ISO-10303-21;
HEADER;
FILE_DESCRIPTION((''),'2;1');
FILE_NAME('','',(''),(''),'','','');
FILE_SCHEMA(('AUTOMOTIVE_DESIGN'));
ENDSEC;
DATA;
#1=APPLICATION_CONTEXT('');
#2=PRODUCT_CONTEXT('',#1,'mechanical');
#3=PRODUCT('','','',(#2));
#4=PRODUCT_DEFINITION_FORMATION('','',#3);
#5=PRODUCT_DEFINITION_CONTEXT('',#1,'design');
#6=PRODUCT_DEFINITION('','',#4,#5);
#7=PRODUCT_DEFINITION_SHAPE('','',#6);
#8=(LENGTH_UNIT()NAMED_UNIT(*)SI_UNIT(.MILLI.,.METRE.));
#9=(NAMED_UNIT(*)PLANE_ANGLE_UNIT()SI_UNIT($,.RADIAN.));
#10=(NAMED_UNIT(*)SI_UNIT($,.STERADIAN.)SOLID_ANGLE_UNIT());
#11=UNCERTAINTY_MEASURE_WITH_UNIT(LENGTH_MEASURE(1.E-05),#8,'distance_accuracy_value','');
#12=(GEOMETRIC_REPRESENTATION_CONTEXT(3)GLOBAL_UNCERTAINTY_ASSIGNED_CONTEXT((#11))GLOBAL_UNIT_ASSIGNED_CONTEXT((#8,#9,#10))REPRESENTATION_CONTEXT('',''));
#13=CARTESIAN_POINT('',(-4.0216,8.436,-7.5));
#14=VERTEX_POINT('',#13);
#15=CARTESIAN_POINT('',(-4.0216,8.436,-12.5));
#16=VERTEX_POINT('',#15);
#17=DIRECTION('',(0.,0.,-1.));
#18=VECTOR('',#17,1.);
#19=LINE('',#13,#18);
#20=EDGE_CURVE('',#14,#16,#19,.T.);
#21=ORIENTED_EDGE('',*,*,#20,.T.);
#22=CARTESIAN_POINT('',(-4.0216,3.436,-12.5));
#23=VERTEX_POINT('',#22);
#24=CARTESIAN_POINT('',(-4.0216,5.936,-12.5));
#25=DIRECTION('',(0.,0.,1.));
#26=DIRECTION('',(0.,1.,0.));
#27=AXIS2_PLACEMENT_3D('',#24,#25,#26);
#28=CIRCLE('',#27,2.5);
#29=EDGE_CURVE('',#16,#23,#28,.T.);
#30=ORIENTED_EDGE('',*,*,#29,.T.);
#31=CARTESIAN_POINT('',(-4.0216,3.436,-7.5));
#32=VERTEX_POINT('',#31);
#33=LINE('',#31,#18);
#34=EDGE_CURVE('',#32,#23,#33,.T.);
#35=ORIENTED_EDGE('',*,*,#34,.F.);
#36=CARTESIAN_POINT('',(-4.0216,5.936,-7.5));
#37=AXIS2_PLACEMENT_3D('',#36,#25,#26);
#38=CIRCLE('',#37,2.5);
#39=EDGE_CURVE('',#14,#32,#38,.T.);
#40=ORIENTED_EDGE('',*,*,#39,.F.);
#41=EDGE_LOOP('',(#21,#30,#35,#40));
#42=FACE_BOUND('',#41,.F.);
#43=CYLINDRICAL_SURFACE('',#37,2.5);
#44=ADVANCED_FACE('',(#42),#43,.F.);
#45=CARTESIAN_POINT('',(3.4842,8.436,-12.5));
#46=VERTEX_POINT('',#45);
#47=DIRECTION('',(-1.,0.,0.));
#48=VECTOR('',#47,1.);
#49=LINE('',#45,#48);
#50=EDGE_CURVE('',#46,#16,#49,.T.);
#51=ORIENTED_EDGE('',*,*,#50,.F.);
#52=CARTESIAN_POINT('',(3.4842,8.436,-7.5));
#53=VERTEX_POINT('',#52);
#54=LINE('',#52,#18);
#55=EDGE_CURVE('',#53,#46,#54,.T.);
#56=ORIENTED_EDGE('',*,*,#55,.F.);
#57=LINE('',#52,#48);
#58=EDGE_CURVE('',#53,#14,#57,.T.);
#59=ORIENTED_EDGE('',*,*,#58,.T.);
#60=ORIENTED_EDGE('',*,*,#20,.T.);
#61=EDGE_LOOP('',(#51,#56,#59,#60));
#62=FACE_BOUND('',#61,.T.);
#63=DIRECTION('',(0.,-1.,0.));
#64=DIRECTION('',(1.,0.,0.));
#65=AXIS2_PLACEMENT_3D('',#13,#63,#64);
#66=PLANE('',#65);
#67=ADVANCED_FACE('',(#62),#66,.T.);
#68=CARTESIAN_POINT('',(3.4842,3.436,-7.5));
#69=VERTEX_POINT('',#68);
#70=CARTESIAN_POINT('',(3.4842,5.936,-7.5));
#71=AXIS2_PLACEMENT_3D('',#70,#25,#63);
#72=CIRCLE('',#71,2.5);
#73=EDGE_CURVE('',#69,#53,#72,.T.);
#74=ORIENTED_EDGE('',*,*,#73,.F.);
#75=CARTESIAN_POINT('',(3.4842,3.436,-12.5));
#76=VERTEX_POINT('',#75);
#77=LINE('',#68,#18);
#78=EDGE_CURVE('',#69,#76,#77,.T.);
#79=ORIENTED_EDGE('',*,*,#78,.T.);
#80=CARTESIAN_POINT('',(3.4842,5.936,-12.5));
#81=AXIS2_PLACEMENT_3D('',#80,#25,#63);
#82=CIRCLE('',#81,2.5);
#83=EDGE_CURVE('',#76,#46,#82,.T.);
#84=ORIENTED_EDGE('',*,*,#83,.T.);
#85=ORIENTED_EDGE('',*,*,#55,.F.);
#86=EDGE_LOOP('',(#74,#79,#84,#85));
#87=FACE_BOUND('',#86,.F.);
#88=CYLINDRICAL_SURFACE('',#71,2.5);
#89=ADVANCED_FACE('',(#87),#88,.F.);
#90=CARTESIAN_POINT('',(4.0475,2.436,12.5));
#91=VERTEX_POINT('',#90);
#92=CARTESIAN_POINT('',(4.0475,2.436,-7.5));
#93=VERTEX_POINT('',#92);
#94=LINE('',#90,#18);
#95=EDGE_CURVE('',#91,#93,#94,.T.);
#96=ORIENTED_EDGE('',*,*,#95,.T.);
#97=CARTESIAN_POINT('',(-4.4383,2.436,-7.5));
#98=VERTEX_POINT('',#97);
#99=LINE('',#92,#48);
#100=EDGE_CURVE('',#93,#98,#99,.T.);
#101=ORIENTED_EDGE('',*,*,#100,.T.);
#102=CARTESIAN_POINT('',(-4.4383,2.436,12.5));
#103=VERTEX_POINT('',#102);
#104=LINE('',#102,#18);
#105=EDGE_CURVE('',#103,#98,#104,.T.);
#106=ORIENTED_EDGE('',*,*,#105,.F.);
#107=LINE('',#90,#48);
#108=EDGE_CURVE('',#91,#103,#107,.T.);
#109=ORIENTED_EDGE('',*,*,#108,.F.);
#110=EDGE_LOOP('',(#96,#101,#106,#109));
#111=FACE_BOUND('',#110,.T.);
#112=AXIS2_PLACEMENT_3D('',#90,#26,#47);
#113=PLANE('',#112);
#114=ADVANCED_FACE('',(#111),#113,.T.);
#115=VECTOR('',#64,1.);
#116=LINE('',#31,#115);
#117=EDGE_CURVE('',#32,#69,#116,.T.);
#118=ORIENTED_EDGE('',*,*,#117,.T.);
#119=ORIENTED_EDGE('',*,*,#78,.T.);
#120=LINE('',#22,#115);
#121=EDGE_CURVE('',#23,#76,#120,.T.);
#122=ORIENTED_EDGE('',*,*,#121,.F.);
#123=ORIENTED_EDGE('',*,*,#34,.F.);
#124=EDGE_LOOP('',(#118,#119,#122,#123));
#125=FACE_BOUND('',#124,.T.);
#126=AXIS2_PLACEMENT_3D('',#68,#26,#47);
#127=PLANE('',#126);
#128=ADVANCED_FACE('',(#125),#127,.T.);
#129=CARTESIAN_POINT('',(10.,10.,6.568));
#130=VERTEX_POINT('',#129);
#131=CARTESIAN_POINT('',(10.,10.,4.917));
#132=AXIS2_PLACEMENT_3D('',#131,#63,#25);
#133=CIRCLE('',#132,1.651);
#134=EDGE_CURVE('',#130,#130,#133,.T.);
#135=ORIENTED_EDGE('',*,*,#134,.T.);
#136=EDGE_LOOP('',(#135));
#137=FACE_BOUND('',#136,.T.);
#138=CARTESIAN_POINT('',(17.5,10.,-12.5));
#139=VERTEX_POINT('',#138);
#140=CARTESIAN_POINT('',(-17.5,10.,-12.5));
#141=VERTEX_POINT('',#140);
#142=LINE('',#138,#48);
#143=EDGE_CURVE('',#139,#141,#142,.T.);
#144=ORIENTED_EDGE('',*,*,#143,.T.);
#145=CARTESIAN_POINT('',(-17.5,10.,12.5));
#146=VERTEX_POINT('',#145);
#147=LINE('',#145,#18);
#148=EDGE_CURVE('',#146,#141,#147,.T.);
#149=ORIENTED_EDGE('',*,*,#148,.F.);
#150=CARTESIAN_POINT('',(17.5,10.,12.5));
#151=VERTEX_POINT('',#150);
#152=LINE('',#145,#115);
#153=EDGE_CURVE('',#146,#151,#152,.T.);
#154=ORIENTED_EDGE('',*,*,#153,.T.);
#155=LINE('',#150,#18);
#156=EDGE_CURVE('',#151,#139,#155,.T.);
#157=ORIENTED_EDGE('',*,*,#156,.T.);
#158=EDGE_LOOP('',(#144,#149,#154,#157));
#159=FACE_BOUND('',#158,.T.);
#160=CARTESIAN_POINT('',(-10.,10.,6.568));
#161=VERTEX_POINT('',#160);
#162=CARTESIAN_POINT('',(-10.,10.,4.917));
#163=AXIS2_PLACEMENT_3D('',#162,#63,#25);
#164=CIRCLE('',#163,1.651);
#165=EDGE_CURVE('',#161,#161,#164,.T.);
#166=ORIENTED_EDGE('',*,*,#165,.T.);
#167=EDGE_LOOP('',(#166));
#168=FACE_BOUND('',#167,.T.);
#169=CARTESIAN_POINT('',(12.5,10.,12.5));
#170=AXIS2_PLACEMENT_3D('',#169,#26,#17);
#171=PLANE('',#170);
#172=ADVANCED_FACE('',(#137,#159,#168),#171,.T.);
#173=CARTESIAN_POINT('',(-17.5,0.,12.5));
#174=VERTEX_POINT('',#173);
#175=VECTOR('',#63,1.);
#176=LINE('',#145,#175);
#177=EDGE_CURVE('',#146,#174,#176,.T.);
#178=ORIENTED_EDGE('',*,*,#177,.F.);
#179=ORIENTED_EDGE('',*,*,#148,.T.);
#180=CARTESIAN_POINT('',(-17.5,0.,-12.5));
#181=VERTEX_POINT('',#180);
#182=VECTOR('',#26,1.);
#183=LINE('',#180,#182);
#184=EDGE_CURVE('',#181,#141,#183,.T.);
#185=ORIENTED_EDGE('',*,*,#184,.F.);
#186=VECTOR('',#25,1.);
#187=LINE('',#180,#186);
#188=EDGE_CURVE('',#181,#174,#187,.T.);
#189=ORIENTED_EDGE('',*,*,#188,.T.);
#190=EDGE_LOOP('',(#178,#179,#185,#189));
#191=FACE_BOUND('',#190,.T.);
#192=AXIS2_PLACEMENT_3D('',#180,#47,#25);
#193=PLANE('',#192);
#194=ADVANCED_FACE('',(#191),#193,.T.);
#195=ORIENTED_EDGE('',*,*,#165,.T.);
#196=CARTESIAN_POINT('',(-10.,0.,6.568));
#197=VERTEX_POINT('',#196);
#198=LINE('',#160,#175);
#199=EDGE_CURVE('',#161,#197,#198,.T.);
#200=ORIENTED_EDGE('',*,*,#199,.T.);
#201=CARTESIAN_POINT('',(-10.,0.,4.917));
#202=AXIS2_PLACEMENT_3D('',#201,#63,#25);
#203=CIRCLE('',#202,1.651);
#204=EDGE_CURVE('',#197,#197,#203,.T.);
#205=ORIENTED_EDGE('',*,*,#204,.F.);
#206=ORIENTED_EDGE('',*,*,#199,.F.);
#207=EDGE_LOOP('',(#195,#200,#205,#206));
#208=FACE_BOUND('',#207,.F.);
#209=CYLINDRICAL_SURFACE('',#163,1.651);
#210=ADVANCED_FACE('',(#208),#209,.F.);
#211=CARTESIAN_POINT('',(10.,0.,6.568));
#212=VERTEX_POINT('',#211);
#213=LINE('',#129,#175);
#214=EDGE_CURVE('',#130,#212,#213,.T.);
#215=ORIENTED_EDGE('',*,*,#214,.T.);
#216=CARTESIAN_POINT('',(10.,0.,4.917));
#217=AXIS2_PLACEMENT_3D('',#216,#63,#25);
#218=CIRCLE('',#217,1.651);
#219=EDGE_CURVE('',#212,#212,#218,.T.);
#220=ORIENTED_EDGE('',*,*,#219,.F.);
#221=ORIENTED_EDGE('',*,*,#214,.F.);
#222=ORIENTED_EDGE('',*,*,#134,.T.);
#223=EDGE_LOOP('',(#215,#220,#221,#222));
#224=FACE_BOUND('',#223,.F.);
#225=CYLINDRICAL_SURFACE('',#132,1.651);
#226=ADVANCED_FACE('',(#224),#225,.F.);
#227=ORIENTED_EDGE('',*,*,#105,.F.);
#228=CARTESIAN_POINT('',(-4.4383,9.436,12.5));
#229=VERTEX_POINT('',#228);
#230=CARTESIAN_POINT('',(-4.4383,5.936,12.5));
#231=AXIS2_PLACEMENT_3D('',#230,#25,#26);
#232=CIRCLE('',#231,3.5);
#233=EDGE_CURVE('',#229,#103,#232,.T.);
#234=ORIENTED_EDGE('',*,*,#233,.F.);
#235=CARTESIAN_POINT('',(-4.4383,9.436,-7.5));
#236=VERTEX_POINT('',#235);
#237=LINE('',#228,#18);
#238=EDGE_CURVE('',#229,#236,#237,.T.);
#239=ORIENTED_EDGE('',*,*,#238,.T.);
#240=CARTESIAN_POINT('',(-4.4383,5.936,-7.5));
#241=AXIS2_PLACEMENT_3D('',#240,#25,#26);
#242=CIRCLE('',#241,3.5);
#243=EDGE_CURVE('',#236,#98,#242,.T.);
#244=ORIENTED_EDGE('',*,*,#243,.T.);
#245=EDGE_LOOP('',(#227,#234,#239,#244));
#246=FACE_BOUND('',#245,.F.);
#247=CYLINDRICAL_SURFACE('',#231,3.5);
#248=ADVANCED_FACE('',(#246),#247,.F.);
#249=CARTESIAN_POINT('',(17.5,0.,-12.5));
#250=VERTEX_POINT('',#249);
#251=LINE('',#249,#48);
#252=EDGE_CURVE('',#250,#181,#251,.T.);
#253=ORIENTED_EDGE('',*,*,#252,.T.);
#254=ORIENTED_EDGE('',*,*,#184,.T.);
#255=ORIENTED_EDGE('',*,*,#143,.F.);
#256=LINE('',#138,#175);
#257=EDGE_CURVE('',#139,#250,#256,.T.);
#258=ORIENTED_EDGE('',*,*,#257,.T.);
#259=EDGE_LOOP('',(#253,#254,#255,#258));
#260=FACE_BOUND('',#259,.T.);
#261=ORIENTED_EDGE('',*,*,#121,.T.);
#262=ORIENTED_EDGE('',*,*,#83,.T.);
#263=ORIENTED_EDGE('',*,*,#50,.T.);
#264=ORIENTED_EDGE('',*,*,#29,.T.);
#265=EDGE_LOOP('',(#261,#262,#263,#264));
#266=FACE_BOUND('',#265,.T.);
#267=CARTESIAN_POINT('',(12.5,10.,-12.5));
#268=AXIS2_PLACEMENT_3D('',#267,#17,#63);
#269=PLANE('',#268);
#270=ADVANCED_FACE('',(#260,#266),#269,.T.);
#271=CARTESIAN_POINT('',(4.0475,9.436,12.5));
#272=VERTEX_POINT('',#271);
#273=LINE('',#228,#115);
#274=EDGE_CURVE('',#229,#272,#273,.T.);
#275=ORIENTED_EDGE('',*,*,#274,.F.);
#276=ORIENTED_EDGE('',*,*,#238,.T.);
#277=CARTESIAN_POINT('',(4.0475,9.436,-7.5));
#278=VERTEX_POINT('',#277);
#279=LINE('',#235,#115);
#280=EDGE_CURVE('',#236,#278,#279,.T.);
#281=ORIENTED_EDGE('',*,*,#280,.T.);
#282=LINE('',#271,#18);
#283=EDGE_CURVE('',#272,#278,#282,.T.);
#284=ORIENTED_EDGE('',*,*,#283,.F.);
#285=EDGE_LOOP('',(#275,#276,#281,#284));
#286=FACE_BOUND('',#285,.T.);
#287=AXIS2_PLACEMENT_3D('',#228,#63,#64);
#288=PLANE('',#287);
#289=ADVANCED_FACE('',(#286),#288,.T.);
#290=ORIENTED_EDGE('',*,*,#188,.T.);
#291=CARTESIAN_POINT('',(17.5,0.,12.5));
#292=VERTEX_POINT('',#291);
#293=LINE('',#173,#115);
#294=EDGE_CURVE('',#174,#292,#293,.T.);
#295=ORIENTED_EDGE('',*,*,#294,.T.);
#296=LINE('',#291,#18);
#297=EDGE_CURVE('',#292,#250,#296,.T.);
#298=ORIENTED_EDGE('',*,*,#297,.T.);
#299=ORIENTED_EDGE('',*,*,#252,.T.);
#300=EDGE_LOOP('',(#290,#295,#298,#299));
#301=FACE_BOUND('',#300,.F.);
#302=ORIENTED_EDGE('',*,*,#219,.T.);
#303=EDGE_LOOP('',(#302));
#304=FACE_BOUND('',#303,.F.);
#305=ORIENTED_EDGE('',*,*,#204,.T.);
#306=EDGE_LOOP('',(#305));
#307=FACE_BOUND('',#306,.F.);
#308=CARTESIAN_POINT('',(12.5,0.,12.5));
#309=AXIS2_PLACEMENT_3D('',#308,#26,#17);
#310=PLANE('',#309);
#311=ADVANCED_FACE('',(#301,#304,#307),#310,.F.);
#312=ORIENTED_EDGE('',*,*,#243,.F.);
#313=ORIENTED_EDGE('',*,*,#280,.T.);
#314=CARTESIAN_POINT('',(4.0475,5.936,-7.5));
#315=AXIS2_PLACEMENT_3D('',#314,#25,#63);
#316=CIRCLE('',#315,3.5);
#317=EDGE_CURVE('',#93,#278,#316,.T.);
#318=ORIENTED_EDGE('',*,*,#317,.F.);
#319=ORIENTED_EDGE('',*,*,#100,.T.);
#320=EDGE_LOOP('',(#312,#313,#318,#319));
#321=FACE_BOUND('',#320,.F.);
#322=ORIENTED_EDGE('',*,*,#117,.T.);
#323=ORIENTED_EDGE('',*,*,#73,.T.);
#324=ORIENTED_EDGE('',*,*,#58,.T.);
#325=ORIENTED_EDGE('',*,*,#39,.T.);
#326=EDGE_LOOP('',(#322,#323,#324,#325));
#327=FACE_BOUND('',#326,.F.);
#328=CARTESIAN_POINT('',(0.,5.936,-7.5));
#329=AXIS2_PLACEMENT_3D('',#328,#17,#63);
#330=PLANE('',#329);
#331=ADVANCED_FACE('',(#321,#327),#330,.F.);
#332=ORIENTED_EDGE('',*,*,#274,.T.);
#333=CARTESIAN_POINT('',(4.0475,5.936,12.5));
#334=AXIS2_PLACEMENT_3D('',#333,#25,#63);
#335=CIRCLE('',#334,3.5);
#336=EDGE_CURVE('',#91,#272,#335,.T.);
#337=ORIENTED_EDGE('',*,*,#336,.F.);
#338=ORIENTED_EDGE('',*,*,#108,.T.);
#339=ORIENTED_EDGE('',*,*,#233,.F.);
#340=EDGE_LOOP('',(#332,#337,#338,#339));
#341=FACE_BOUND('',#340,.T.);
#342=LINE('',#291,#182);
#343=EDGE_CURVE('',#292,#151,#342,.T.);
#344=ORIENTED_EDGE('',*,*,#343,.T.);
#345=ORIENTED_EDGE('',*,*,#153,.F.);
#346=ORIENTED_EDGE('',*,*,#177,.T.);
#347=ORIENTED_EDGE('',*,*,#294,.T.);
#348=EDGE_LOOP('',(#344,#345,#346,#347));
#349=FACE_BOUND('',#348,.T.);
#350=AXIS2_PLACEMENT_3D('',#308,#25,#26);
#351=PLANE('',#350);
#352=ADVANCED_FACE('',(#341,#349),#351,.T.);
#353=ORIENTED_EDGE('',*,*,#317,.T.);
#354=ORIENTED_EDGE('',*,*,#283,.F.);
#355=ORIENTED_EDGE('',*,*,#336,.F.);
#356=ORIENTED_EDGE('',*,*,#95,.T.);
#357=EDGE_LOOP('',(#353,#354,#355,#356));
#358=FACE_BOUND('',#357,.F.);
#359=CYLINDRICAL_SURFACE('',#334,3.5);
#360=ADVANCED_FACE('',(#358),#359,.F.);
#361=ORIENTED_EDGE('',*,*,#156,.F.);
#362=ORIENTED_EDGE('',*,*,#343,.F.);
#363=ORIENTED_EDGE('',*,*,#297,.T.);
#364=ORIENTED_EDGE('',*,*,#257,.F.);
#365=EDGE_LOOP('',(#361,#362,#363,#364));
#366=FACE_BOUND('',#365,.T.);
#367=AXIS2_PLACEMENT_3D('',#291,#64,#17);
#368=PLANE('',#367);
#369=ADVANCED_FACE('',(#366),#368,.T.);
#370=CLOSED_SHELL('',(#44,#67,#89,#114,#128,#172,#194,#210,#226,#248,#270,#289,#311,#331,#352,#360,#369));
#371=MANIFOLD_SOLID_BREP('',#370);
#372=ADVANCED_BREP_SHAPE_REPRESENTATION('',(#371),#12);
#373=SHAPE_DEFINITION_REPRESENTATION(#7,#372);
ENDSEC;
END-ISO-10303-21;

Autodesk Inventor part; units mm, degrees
ref_plane "YZ Plane" through (0, 0, 0) normal (1, 0, 0) x (0, 1, 0)
ref_plane "XZ Plane" through (0, 0, 0) normal (0, 1, 0) x (-1, 0, 0)
ref_plane "XY Plane" through (0, 0, 0) normal (0, 0, 1) x (1, 0, 0)
sketch "Sketch1" plane through (0, 0, 0) normal (0, 1, 0) x (-1, 0, 0)
  line L0 (12.5, 12.5) -> (-12.5, 12.5)
  line L1 (-12.5, 12.5) -> (-12.5, -12.5)
  line L2 (-12.5, -12.5) -> (12.5, -12.5)
  line L3 (12.5, -12.5) -> (12.5, 12.5)
  line L4 (12.5, 12.5) -> (-12.5, -12.5) construction
  line L5 (-12.5, 12.5) -> (12.5, -12.5) construction
  point P0 (0, 0)
  dimension "d0" = 25
  dimension "d1" = 25
extrude "Extrusion1" add sketch "Sketch1" along normal blind 10
sketch "Sketch2" plane through (-12.5, 0, 12.5) normal (0, 0, 1) x (1, 0, 0)
  line L0 (25, 0) -> (25, 10) projected
  line L1 (0, 10) -> (25, 10) projected
  point P0 (12.5, 0)
  point P1 (12.5, 5.936)
  dimension "d12" = 4.064
hole "Hole1" at (0, 5.936, 12.5) direction (0, 0, -1) diameter 5 depth 25 counterbore diameter 7 counterbore depth 20
sketch "Sketch4" plane through (-12.5, 0, 12.5) normal (0, 0, 1) x (1, 0, 0)
  line L0 (4.5617, 5.936) -> (20.0475, 5.936) construction
  line L1 (8.0617, 9.436) -> (16.5475, 9.436)
  line L2 (16.5475, 2.436) -> (8.0617, 2.436)
  arc A0 (8.0617, 9.436) -> (8.0617, 2.436) centre (8.0617, 5.936) ccw
  arc A1 (16.5475, 2.436) -> (16.5475, 9.436) centre (16.5475, 5.936) ccw
  point P0 (12.5, 0)
  point P1 (12.3046, 5.936)
extrude "Extrusion2" cut sketch "Sketch4" against normal blind 20
sketch "Sketch5" plane through (-4.4383, 9.436, -7.5) normal (0, 0, 1) x (1, 0, 0)
  line L0 (-2.0833, -3.5) -> (10.4225, -3.5) construction
  line L1 (0.4167, -1) -> (7.9225, -1)
  line L2 (7.9225, -6) -> (0.4167, -6)
  arc A0 (0.4167, -1) -> (0.4167, -6) centre (0.4167, -3.5) ccw
  arc A1 (7.9225, -6) -> (7.9225, -1) centre (7.9225, -3.5) ccw
  point P0 (4.4383, -9.436)
  point P1 (4.1696, -3.5)
extrude "Extrusion3" cut sketch "Sketch5" against normal blind 20
sketch "Sketch6" plane through (-12.5, 0, -12.5) normal (-1, 0, 0) x (0, 0, 1)
  line L0 (25, 10) -> (0, 10) projected
  line L1 (0, 0) -> (25, 0) projected
  line L2 (0, 10) -> (25, 10)
  line L3 (25, 10) -> (25, 0)
  line L4 (25, 0) -> (0, 0)
  line L5 (0, 0) -> (0, 10)
  point P0 (12.5, 0)
extrude "Extrusion4" add sketch "Sketch6" along normal blind 5
sketch "Sketch7" plane through (12.5, 0, 12.5) normal (1, 0, 0) x (0, 0, -1)
  line L0 (0, 10) -> (25, 10) projected
  line L1 (0, 0) -> (25, 0) projected
  line L2 (0, 10) -> (25, 10)
  line L3 (25, 10) -> (25, 0)
  line L4 (25, 0) -> (0, 0)
  line L5 (0, 0) -> (0, 10)
  point P0 (12.5, 0)
extrude "Extrusion5" add sketch "Sketch7" along normal blind 5
sketch "Sketch8" plane through (0, 10, 0) normal (0, 1, 0) x (1, 0, 0)
  line L0 (-17.5, 12.5) -> (17.5, 12.5) projected
  line L1 (-17.5, -12.5) -> (-17.5, 12.5) projected
  line L2 (17.5, 12.5) -> (17.5, -12.5) projected
  point P0 (0, 0)
  point P1 (10, -4.917)
  point P2 (-10, -4.917)
  dimension "d28" = 17.417
  dimension "d29" = 17.417
  dimension "d30" = 7.5
  dimension "d31" = 7.5
hole "Hole2" at (10, 10, 4.917) at (-10, 10, 4.917) direction (0, -1, 0) diameter 3.302 depth 12.3 thread size "8-32 UNC" class "2B" standard "ANSI Unified Screw Threads"
properties part number "ResonantAdapter"
